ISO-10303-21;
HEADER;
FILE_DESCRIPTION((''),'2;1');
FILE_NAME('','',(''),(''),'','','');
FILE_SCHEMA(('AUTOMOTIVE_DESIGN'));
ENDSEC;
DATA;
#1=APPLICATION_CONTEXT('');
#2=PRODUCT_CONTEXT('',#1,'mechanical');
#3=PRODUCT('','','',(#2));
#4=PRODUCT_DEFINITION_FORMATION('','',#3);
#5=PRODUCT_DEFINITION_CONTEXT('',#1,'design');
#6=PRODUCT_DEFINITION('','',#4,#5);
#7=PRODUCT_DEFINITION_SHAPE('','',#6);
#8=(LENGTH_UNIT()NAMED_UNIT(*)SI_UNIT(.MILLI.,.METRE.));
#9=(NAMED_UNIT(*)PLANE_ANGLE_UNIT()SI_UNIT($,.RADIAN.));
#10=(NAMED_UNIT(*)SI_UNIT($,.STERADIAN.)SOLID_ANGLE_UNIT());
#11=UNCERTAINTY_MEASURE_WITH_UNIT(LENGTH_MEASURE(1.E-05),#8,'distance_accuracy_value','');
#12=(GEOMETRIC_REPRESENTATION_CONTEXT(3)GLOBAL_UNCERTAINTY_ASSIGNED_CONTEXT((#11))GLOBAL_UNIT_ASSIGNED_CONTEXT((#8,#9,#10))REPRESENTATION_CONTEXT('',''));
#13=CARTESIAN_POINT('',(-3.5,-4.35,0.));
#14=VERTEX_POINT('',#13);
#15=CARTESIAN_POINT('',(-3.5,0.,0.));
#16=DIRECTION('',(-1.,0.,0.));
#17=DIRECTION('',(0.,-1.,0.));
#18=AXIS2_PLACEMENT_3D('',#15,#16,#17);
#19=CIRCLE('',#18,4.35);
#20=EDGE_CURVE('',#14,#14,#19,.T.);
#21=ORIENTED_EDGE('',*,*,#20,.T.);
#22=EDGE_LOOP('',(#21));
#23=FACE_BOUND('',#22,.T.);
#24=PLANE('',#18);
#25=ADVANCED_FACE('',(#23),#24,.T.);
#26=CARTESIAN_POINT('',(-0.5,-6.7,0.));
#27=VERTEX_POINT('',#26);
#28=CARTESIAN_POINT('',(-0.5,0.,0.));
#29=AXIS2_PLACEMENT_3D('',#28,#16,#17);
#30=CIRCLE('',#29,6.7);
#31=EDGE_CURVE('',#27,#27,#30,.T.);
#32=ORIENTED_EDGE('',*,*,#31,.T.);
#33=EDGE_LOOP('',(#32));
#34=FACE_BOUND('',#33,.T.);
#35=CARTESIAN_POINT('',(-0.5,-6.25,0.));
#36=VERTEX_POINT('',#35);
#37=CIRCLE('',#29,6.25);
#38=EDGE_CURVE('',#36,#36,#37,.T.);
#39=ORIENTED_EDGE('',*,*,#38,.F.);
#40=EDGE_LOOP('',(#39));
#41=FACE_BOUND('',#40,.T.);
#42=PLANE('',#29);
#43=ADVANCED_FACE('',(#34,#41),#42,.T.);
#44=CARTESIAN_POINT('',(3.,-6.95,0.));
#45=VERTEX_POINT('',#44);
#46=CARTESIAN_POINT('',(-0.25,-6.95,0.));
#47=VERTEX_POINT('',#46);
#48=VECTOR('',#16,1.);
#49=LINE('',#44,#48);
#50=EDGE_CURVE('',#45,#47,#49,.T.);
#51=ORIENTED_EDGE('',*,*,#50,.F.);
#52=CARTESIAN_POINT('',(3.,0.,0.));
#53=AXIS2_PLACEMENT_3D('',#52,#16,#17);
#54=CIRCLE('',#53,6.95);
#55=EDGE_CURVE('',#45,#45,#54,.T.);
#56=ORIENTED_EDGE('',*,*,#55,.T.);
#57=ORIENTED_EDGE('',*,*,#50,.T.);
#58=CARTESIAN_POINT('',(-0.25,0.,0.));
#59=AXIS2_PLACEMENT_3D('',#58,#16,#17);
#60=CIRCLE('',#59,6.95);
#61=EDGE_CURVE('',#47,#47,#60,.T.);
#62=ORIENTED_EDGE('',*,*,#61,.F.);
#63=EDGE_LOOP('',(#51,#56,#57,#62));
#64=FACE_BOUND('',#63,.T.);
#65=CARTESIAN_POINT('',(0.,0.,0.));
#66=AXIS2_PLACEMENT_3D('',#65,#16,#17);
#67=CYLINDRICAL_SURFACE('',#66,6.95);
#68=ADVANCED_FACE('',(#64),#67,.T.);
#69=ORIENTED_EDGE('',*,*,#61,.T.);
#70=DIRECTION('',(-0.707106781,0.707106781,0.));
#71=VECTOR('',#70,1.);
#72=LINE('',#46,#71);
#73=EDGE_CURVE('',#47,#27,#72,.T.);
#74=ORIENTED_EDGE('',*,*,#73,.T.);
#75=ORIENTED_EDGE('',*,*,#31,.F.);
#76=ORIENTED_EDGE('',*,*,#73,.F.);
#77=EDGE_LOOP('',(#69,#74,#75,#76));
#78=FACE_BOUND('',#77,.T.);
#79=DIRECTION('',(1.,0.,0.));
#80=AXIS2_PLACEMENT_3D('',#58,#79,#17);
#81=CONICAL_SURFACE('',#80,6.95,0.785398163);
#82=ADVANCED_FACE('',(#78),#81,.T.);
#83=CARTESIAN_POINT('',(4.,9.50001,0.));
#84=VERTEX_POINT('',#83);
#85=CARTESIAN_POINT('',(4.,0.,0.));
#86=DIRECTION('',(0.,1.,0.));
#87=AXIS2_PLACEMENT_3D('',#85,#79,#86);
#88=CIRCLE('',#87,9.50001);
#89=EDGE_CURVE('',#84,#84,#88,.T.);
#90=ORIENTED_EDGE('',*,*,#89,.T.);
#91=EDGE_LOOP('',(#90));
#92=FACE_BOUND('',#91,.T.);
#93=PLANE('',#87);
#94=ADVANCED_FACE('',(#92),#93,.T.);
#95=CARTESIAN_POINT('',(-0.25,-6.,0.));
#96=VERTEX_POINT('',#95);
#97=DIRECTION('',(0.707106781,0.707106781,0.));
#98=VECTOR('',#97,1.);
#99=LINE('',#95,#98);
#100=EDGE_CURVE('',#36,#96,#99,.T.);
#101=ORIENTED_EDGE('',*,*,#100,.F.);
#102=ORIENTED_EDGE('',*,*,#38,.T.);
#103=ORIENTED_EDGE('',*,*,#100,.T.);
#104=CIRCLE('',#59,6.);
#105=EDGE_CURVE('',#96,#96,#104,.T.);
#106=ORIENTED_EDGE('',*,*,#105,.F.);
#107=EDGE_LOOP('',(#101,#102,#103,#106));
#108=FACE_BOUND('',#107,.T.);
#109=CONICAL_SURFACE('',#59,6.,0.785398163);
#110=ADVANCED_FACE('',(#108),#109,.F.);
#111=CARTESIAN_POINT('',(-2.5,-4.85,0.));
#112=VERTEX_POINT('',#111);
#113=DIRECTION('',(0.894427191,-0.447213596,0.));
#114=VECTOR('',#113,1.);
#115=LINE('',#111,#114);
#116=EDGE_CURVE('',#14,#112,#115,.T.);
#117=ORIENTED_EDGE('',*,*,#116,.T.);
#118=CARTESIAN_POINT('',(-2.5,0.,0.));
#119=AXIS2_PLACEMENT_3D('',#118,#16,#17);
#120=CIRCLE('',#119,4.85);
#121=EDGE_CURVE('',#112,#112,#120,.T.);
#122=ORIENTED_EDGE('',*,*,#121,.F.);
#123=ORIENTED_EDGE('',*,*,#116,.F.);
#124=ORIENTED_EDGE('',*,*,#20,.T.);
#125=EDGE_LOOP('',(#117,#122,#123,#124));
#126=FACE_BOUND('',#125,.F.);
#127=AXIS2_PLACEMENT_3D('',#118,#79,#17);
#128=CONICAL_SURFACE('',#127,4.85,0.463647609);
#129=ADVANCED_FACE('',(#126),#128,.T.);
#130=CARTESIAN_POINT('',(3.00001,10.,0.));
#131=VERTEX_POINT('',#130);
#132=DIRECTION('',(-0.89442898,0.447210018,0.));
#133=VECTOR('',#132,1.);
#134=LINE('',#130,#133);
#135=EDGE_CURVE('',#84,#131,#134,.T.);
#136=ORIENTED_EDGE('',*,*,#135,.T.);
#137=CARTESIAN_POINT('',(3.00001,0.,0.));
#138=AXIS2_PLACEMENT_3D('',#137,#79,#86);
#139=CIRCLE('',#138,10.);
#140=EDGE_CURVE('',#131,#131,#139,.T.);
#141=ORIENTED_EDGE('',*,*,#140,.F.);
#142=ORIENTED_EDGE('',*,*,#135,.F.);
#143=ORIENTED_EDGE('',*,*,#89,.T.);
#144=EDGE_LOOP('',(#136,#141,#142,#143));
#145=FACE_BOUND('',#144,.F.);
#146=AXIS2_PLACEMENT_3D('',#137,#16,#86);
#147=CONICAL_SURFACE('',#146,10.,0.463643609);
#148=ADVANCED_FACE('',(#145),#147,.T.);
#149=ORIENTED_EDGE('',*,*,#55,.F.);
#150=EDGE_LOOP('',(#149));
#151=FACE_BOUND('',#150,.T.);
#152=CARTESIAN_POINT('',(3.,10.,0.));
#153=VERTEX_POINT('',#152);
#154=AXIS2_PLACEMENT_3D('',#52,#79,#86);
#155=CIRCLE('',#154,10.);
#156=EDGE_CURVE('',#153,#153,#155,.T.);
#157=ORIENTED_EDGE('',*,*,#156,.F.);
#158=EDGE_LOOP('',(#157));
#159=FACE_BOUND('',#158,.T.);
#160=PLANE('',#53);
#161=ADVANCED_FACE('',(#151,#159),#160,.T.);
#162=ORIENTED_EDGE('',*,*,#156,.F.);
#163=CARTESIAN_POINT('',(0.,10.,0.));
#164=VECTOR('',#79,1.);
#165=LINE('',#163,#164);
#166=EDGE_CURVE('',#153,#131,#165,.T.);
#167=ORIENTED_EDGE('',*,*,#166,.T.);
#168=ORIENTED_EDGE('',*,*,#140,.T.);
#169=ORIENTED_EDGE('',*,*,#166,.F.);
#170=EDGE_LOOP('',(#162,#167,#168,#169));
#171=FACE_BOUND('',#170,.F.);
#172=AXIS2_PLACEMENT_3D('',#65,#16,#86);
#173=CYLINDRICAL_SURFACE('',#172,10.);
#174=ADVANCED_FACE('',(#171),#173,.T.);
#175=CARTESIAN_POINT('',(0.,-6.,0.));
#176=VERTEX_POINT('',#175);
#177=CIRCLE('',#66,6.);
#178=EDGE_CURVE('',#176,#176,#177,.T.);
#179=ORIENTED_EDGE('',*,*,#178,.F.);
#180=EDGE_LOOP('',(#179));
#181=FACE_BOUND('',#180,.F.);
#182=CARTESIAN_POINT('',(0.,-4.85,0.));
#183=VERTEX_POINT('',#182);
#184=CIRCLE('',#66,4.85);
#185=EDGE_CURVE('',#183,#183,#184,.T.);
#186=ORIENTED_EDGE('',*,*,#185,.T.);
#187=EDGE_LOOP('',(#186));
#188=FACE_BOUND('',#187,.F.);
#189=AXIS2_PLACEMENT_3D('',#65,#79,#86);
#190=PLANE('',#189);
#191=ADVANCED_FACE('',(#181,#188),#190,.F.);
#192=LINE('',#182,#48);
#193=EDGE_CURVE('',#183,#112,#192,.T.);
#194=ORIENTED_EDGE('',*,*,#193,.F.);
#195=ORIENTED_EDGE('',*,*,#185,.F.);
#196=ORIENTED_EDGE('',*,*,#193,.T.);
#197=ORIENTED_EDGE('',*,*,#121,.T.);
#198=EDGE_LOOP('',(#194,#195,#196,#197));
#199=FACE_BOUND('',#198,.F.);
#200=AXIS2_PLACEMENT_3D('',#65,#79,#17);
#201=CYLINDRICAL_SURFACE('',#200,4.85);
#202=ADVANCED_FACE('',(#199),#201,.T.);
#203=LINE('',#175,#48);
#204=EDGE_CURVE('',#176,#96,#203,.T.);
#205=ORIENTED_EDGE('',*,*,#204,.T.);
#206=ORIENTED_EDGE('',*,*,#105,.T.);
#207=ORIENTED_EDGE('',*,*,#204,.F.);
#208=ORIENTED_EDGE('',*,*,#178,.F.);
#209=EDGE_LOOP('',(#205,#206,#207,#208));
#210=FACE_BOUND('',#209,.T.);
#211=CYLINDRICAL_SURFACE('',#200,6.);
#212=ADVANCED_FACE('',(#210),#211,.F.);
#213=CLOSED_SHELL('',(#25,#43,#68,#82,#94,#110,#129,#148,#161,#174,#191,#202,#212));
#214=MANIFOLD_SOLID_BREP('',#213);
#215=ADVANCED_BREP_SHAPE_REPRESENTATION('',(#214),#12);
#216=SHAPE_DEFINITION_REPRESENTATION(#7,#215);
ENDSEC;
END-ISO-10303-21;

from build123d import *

# Parameters (mm, degrees)
F0_R       = 10
F1_DEPTH   = 4
F2_R       = 4.85
F3_DEPTH   = 3.5
F4_R       = 6.95
F4_R_2     = 6
F5_DEPTH   = 0.5
F6_R       = 10
F6_R_2     = 6.95
F7_DEPTH   = 3
F8_SIZE    = 0.25
F9_SIZE2   = 0.99999
F9_SIZE    = 0.49999
F9_2_SIZE2 = 1
F9_2_SIZE  = 0.5


# Not quite as in the source:
# - a fillet or chamfer is up to 0.001 mm smaller than in the source, because OpenCascade refuses the exact size


with BuildPart() as f1:
    # F0 (on Right) → F1 (new body)
    with BuildSketch(Plane.YZ):
        Circle(F0_R)
    extrude(amount=F1_DEPTH)

    # F2 (on face) → F3 (join)
    with BuildSketch(Plane(origin=(0, 0, 0), x_dir=(0, -1, 0), z_dir=(-1, 0, 0))):
        Circle(F2_R)
    extrude(amount=F3_DEPTH)

    # F4 (on face) → F5 (join)
    with BuildSketch(Plane(origin=(0, 0, 0), x_dir=(0, -1, 0), z_dir=(-1, 0, 0))):
        Circle(F4_R)
        Circle(F4_R_2, mode=Mode.SUBTRACT)
    extrude(amount=F5_DEPTH)

    # F6 (on face) → F7 (cut)
    with BuildSketch(Plane(origin=(0, 0, 0), x_dir=(0, -1, 0), z_dir=(-1, 0, 0))):
        Circle(F6_R)
        Circle(F6_R_2, mode=Mode.SUBTRACT)
    extrude(amount=-F7_DEPTH, mode=Mode.SUBTRACT)

    # F8
    f8_edges = [f1.edges().sort_by_distance(p)[0] for p in [
        (-0.5, 6.95, 0),
        (-0.5, 6, 0),
    ]]
    chamfer(f8_edges, length=F8_SIZE)

    # F9 (size 0.5 and 1 in the source; OpenCascade refuses exactly that, so slightly less here)
    f9_edges = [f1.edges().sort_by_distance(p)[0] for p in [
        (4, -10, 0),
    ]]
    f9_side = f1.faces().sort_by_distance((4, 0, 0))[0]
    chamfer(f9_edges, length=F9_SIZE, length2=F9_SIZE2, reference=f9_side)

    # F9#2
    f9_2_edges = [f1.edges().sort_by_distance(p)[0] for p in [
        (-3.5, 4.85, 0),
    ]]
    f9_2_side = f1.faces().sort_by_distance((-3.5, 0, 0))[0]
    chamfer(f9_2_edges, length=F9_2_SIZE, length2=F9_2_SIZE2, reference=f9_2_side)


solid = f1.part
